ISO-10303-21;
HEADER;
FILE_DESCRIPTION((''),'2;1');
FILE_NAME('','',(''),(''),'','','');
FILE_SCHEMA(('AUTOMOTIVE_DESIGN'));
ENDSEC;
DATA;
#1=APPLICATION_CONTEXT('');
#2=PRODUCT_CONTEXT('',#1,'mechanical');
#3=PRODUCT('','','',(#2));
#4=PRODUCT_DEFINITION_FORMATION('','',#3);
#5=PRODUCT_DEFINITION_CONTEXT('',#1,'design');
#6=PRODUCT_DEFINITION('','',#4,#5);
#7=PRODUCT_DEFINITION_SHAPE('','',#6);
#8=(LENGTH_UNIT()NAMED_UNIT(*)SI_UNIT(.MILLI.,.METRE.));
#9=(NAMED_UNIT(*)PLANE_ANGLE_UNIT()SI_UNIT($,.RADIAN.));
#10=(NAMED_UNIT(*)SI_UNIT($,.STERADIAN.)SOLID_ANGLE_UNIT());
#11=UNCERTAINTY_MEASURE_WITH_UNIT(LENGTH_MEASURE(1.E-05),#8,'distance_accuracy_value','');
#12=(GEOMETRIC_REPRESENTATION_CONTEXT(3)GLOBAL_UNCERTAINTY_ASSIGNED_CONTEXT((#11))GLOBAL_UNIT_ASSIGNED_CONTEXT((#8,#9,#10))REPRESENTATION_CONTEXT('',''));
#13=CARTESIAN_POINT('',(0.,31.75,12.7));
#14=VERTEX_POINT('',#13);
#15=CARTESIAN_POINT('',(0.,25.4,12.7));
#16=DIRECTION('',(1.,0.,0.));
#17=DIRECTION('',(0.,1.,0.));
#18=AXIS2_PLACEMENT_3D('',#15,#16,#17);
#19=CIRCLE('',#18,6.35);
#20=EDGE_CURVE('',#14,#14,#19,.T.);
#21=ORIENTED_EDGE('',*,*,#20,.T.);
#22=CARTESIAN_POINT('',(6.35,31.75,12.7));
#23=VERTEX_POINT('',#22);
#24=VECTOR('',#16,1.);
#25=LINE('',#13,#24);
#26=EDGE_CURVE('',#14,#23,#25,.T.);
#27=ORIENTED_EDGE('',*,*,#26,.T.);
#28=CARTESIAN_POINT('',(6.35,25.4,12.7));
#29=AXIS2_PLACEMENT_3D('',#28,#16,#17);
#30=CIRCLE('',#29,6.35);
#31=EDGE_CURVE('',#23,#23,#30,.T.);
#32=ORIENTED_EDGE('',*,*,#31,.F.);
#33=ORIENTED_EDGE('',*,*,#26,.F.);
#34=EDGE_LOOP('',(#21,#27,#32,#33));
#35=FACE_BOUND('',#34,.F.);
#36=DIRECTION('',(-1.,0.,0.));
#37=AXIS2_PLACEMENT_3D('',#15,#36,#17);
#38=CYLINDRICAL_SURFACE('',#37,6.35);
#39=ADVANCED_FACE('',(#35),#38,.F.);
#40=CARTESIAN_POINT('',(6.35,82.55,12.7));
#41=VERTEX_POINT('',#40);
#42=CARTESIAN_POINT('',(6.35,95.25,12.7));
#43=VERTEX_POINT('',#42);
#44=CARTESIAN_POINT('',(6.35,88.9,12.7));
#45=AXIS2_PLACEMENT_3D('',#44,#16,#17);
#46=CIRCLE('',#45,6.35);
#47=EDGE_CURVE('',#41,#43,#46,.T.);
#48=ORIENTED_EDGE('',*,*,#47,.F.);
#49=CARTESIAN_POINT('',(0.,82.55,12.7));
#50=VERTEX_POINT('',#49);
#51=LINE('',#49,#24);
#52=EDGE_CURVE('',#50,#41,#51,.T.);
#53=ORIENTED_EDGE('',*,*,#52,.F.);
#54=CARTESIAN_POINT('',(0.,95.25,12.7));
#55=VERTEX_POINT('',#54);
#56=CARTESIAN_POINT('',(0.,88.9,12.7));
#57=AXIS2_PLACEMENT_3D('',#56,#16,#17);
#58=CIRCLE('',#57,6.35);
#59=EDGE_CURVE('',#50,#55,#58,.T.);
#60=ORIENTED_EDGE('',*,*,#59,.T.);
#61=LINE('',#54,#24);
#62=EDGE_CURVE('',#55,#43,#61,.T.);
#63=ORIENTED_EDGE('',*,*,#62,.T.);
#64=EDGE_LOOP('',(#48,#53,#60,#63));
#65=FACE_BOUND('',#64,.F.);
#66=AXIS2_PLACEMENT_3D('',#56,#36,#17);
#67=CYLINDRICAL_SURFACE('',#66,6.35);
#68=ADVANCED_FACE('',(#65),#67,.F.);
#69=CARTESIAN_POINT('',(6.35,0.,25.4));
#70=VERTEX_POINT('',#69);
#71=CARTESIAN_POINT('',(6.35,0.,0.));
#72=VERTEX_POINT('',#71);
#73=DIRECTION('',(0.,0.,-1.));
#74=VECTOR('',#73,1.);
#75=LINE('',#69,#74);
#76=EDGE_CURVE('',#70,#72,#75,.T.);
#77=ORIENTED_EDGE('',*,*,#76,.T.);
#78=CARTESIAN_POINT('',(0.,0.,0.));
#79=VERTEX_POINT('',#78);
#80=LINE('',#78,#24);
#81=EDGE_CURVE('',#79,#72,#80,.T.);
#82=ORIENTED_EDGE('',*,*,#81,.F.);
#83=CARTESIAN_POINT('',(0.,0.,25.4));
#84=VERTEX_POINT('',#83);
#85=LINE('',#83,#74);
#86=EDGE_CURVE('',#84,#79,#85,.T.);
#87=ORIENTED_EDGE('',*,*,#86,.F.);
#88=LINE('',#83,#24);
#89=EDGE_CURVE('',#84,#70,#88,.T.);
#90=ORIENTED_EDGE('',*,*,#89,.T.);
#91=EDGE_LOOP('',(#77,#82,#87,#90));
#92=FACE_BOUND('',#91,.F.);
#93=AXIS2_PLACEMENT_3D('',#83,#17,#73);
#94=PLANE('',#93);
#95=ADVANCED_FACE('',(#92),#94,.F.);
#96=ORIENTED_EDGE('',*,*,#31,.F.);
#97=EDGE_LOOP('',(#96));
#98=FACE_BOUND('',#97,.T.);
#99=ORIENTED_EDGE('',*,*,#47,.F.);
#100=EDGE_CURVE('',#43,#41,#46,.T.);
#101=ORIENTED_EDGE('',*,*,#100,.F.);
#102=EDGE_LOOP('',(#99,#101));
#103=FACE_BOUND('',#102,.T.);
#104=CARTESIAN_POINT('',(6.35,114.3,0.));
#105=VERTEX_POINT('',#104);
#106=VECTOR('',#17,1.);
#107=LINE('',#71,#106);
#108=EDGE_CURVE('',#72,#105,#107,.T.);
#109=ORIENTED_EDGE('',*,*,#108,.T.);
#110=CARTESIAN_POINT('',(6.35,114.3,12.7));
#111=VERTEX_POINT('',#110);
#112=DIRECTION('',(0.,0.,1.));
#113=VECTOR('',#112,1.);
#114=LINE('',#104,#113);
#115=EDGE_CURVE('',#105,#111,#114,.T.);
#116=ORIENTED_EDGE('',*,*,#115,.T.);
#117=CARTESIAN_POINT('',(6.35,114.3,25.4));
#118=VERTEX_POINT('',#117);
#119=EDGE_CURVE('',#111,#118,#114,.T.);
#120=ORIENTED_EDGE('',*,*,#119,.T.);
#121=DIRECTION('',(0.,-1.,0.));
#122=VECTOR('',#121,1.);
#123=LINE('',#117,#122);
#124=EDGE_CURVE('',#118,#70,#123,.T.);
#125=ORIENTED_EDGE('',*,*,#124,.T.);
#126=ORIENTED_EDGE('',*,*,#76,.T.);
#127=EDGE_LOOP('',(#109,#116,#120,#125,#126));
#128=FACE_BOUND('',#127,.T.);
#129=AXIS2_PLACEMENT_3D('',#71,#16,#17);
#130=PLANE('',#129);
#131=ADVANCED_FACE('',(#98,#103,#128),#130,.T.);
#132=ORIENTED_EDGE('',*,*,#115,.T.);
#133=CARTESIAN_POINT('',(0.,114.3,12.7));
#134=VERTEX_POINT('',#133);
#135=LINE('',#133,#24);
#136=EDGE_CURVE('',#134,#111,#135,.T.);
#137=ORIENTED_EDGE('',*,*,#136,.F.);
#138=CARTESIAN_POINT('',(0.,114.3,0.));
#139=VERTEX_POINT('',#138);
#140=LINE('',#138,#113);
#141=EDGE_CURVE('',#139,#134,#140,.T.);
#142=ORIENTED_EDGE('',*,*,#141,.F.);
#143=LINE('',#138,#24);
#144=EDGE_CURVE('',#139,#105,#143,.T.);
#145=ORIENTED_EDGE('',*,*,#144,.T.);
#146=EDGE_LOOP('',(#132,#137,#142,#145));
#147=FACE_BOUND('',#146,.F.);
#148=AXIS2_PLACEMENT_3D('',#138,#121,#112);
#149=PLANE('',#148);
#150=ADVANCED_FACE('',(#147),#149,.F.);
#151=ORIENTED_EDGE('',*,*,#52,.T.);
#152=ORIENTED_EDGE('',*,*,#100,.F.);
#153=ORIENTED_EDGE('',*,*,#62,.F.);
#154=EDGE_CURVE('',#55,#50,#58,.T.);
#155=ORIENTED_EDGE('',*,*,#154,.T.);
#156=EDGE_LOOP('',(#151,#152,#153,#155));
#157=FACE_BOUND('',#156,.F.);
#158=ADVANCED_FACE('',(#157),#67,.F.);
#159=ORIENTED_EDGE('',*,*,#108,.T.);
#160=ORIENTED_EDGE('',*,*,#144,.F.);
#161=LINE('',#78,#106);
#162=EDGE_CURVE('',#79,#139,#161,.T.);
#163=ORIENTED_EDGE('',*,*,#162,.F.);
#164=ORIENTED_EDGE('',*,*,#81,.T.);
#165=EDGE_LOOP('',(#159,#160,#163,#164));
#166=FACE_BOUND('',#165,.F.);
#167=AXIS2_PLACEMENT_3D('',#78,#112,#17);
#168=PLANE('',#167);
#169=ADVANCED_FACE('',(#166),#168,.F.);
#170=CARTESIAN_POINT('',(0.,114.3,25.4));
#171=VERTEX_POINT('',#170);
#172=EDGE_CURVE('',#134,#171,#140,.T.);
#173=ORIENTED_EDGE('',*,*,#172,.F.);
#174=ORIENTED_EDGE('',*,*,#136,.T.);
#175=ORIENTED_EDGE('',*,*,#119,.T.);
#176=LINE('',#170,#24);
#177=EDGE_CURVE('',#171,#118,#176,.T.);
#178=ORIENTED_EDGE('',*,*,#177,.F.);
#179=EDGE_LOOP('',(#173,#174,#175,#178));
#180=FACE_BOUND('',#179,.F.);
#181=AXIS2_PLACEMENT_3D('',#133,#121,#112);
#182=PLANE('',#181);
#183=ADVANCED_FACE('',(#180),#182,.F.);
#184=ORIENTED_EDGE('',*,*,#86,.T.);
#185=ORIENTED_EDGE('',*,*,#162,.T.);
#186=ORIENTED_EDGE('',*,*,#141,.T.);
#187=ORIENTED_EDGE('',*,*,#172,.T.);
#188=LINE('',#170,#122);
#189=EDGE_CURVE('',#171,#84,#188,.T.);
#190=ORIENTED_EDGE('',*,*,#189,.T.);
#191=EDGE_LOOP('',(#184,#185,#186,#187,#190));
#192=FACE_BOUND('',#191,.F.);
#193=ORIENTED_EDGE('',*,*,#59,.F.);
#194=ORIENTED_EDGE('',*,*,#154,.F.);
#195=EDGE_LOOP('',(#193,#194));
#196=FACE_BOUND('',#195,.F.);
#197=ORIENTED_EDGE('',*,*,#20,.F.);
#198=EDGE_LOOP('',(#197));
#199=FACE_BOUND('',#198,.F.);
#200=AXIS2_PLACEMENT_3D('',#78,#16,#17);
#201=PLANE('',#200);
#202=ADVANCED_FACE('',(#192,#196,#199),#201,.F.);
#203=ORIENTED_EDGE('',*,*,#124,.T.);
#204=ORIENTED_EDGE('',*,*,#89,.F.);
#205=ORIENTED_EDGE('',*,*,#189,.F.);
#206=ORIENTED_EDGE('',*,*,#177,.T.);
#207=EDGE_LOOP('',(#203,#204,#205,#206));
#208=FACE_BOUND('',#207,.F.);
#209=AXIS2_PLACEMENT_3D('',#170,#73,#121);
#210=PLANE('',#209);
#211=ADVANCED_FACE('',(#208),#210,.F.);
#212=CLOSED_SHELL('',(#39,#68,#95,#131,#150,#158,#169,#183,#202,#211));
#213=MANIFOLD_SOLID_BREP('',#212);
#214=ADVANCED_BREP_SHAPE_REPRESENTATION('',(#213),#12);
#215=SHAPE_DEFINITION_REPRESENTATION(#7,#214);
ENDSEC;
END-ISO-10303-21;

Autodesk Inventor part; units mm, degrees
ref_plane "YZ Plane" through (0, 0, 0) normal (1, 0, 0) x (0, 1, 0)
ref_plane "XZ Plane" through (0, 0, 0) normal (0, 1, 0) x (-1, 0, 0)
ref_plane "XY Plane" through (0, 0, 0) normal (0, 0, 1) x (1, 0, 0)
sketch "Sketch1" plane through (0, 0, 0) normal (1, 0, 0) x (0, 1, 0)
  line L0 (0, 0) -> (114.3, 0)
  line L1 (114.3, 0) -> (114.3, 25.4)
  line L2 (114.3, 25.4) -> (0, 25.4)
  line L3 (0, 25.4) -> (0, 0)
  line L4 (114.3, 12.7) -> (88.9, 12.7)
  line L5 (88.9, 12.7) -> (25.4, 12.7)
  circle A0 centre (25.4, 12.7) radius 6.35
  circle A1 centre (88.9, 12.7) radius 6.35
  dimension "d0" = 114.3
  dimension "d1" = 25.4
  dimension "d4" = 25.4
  dimension "d5" = 63.5
  dimension "d6" = 12.7
  dimension "d7" = 12.7
extrude "Extrusion2" add sketch "Sketch1" along normal blind 6.35
properties part number "CatapultArmSquare-Thickener"
